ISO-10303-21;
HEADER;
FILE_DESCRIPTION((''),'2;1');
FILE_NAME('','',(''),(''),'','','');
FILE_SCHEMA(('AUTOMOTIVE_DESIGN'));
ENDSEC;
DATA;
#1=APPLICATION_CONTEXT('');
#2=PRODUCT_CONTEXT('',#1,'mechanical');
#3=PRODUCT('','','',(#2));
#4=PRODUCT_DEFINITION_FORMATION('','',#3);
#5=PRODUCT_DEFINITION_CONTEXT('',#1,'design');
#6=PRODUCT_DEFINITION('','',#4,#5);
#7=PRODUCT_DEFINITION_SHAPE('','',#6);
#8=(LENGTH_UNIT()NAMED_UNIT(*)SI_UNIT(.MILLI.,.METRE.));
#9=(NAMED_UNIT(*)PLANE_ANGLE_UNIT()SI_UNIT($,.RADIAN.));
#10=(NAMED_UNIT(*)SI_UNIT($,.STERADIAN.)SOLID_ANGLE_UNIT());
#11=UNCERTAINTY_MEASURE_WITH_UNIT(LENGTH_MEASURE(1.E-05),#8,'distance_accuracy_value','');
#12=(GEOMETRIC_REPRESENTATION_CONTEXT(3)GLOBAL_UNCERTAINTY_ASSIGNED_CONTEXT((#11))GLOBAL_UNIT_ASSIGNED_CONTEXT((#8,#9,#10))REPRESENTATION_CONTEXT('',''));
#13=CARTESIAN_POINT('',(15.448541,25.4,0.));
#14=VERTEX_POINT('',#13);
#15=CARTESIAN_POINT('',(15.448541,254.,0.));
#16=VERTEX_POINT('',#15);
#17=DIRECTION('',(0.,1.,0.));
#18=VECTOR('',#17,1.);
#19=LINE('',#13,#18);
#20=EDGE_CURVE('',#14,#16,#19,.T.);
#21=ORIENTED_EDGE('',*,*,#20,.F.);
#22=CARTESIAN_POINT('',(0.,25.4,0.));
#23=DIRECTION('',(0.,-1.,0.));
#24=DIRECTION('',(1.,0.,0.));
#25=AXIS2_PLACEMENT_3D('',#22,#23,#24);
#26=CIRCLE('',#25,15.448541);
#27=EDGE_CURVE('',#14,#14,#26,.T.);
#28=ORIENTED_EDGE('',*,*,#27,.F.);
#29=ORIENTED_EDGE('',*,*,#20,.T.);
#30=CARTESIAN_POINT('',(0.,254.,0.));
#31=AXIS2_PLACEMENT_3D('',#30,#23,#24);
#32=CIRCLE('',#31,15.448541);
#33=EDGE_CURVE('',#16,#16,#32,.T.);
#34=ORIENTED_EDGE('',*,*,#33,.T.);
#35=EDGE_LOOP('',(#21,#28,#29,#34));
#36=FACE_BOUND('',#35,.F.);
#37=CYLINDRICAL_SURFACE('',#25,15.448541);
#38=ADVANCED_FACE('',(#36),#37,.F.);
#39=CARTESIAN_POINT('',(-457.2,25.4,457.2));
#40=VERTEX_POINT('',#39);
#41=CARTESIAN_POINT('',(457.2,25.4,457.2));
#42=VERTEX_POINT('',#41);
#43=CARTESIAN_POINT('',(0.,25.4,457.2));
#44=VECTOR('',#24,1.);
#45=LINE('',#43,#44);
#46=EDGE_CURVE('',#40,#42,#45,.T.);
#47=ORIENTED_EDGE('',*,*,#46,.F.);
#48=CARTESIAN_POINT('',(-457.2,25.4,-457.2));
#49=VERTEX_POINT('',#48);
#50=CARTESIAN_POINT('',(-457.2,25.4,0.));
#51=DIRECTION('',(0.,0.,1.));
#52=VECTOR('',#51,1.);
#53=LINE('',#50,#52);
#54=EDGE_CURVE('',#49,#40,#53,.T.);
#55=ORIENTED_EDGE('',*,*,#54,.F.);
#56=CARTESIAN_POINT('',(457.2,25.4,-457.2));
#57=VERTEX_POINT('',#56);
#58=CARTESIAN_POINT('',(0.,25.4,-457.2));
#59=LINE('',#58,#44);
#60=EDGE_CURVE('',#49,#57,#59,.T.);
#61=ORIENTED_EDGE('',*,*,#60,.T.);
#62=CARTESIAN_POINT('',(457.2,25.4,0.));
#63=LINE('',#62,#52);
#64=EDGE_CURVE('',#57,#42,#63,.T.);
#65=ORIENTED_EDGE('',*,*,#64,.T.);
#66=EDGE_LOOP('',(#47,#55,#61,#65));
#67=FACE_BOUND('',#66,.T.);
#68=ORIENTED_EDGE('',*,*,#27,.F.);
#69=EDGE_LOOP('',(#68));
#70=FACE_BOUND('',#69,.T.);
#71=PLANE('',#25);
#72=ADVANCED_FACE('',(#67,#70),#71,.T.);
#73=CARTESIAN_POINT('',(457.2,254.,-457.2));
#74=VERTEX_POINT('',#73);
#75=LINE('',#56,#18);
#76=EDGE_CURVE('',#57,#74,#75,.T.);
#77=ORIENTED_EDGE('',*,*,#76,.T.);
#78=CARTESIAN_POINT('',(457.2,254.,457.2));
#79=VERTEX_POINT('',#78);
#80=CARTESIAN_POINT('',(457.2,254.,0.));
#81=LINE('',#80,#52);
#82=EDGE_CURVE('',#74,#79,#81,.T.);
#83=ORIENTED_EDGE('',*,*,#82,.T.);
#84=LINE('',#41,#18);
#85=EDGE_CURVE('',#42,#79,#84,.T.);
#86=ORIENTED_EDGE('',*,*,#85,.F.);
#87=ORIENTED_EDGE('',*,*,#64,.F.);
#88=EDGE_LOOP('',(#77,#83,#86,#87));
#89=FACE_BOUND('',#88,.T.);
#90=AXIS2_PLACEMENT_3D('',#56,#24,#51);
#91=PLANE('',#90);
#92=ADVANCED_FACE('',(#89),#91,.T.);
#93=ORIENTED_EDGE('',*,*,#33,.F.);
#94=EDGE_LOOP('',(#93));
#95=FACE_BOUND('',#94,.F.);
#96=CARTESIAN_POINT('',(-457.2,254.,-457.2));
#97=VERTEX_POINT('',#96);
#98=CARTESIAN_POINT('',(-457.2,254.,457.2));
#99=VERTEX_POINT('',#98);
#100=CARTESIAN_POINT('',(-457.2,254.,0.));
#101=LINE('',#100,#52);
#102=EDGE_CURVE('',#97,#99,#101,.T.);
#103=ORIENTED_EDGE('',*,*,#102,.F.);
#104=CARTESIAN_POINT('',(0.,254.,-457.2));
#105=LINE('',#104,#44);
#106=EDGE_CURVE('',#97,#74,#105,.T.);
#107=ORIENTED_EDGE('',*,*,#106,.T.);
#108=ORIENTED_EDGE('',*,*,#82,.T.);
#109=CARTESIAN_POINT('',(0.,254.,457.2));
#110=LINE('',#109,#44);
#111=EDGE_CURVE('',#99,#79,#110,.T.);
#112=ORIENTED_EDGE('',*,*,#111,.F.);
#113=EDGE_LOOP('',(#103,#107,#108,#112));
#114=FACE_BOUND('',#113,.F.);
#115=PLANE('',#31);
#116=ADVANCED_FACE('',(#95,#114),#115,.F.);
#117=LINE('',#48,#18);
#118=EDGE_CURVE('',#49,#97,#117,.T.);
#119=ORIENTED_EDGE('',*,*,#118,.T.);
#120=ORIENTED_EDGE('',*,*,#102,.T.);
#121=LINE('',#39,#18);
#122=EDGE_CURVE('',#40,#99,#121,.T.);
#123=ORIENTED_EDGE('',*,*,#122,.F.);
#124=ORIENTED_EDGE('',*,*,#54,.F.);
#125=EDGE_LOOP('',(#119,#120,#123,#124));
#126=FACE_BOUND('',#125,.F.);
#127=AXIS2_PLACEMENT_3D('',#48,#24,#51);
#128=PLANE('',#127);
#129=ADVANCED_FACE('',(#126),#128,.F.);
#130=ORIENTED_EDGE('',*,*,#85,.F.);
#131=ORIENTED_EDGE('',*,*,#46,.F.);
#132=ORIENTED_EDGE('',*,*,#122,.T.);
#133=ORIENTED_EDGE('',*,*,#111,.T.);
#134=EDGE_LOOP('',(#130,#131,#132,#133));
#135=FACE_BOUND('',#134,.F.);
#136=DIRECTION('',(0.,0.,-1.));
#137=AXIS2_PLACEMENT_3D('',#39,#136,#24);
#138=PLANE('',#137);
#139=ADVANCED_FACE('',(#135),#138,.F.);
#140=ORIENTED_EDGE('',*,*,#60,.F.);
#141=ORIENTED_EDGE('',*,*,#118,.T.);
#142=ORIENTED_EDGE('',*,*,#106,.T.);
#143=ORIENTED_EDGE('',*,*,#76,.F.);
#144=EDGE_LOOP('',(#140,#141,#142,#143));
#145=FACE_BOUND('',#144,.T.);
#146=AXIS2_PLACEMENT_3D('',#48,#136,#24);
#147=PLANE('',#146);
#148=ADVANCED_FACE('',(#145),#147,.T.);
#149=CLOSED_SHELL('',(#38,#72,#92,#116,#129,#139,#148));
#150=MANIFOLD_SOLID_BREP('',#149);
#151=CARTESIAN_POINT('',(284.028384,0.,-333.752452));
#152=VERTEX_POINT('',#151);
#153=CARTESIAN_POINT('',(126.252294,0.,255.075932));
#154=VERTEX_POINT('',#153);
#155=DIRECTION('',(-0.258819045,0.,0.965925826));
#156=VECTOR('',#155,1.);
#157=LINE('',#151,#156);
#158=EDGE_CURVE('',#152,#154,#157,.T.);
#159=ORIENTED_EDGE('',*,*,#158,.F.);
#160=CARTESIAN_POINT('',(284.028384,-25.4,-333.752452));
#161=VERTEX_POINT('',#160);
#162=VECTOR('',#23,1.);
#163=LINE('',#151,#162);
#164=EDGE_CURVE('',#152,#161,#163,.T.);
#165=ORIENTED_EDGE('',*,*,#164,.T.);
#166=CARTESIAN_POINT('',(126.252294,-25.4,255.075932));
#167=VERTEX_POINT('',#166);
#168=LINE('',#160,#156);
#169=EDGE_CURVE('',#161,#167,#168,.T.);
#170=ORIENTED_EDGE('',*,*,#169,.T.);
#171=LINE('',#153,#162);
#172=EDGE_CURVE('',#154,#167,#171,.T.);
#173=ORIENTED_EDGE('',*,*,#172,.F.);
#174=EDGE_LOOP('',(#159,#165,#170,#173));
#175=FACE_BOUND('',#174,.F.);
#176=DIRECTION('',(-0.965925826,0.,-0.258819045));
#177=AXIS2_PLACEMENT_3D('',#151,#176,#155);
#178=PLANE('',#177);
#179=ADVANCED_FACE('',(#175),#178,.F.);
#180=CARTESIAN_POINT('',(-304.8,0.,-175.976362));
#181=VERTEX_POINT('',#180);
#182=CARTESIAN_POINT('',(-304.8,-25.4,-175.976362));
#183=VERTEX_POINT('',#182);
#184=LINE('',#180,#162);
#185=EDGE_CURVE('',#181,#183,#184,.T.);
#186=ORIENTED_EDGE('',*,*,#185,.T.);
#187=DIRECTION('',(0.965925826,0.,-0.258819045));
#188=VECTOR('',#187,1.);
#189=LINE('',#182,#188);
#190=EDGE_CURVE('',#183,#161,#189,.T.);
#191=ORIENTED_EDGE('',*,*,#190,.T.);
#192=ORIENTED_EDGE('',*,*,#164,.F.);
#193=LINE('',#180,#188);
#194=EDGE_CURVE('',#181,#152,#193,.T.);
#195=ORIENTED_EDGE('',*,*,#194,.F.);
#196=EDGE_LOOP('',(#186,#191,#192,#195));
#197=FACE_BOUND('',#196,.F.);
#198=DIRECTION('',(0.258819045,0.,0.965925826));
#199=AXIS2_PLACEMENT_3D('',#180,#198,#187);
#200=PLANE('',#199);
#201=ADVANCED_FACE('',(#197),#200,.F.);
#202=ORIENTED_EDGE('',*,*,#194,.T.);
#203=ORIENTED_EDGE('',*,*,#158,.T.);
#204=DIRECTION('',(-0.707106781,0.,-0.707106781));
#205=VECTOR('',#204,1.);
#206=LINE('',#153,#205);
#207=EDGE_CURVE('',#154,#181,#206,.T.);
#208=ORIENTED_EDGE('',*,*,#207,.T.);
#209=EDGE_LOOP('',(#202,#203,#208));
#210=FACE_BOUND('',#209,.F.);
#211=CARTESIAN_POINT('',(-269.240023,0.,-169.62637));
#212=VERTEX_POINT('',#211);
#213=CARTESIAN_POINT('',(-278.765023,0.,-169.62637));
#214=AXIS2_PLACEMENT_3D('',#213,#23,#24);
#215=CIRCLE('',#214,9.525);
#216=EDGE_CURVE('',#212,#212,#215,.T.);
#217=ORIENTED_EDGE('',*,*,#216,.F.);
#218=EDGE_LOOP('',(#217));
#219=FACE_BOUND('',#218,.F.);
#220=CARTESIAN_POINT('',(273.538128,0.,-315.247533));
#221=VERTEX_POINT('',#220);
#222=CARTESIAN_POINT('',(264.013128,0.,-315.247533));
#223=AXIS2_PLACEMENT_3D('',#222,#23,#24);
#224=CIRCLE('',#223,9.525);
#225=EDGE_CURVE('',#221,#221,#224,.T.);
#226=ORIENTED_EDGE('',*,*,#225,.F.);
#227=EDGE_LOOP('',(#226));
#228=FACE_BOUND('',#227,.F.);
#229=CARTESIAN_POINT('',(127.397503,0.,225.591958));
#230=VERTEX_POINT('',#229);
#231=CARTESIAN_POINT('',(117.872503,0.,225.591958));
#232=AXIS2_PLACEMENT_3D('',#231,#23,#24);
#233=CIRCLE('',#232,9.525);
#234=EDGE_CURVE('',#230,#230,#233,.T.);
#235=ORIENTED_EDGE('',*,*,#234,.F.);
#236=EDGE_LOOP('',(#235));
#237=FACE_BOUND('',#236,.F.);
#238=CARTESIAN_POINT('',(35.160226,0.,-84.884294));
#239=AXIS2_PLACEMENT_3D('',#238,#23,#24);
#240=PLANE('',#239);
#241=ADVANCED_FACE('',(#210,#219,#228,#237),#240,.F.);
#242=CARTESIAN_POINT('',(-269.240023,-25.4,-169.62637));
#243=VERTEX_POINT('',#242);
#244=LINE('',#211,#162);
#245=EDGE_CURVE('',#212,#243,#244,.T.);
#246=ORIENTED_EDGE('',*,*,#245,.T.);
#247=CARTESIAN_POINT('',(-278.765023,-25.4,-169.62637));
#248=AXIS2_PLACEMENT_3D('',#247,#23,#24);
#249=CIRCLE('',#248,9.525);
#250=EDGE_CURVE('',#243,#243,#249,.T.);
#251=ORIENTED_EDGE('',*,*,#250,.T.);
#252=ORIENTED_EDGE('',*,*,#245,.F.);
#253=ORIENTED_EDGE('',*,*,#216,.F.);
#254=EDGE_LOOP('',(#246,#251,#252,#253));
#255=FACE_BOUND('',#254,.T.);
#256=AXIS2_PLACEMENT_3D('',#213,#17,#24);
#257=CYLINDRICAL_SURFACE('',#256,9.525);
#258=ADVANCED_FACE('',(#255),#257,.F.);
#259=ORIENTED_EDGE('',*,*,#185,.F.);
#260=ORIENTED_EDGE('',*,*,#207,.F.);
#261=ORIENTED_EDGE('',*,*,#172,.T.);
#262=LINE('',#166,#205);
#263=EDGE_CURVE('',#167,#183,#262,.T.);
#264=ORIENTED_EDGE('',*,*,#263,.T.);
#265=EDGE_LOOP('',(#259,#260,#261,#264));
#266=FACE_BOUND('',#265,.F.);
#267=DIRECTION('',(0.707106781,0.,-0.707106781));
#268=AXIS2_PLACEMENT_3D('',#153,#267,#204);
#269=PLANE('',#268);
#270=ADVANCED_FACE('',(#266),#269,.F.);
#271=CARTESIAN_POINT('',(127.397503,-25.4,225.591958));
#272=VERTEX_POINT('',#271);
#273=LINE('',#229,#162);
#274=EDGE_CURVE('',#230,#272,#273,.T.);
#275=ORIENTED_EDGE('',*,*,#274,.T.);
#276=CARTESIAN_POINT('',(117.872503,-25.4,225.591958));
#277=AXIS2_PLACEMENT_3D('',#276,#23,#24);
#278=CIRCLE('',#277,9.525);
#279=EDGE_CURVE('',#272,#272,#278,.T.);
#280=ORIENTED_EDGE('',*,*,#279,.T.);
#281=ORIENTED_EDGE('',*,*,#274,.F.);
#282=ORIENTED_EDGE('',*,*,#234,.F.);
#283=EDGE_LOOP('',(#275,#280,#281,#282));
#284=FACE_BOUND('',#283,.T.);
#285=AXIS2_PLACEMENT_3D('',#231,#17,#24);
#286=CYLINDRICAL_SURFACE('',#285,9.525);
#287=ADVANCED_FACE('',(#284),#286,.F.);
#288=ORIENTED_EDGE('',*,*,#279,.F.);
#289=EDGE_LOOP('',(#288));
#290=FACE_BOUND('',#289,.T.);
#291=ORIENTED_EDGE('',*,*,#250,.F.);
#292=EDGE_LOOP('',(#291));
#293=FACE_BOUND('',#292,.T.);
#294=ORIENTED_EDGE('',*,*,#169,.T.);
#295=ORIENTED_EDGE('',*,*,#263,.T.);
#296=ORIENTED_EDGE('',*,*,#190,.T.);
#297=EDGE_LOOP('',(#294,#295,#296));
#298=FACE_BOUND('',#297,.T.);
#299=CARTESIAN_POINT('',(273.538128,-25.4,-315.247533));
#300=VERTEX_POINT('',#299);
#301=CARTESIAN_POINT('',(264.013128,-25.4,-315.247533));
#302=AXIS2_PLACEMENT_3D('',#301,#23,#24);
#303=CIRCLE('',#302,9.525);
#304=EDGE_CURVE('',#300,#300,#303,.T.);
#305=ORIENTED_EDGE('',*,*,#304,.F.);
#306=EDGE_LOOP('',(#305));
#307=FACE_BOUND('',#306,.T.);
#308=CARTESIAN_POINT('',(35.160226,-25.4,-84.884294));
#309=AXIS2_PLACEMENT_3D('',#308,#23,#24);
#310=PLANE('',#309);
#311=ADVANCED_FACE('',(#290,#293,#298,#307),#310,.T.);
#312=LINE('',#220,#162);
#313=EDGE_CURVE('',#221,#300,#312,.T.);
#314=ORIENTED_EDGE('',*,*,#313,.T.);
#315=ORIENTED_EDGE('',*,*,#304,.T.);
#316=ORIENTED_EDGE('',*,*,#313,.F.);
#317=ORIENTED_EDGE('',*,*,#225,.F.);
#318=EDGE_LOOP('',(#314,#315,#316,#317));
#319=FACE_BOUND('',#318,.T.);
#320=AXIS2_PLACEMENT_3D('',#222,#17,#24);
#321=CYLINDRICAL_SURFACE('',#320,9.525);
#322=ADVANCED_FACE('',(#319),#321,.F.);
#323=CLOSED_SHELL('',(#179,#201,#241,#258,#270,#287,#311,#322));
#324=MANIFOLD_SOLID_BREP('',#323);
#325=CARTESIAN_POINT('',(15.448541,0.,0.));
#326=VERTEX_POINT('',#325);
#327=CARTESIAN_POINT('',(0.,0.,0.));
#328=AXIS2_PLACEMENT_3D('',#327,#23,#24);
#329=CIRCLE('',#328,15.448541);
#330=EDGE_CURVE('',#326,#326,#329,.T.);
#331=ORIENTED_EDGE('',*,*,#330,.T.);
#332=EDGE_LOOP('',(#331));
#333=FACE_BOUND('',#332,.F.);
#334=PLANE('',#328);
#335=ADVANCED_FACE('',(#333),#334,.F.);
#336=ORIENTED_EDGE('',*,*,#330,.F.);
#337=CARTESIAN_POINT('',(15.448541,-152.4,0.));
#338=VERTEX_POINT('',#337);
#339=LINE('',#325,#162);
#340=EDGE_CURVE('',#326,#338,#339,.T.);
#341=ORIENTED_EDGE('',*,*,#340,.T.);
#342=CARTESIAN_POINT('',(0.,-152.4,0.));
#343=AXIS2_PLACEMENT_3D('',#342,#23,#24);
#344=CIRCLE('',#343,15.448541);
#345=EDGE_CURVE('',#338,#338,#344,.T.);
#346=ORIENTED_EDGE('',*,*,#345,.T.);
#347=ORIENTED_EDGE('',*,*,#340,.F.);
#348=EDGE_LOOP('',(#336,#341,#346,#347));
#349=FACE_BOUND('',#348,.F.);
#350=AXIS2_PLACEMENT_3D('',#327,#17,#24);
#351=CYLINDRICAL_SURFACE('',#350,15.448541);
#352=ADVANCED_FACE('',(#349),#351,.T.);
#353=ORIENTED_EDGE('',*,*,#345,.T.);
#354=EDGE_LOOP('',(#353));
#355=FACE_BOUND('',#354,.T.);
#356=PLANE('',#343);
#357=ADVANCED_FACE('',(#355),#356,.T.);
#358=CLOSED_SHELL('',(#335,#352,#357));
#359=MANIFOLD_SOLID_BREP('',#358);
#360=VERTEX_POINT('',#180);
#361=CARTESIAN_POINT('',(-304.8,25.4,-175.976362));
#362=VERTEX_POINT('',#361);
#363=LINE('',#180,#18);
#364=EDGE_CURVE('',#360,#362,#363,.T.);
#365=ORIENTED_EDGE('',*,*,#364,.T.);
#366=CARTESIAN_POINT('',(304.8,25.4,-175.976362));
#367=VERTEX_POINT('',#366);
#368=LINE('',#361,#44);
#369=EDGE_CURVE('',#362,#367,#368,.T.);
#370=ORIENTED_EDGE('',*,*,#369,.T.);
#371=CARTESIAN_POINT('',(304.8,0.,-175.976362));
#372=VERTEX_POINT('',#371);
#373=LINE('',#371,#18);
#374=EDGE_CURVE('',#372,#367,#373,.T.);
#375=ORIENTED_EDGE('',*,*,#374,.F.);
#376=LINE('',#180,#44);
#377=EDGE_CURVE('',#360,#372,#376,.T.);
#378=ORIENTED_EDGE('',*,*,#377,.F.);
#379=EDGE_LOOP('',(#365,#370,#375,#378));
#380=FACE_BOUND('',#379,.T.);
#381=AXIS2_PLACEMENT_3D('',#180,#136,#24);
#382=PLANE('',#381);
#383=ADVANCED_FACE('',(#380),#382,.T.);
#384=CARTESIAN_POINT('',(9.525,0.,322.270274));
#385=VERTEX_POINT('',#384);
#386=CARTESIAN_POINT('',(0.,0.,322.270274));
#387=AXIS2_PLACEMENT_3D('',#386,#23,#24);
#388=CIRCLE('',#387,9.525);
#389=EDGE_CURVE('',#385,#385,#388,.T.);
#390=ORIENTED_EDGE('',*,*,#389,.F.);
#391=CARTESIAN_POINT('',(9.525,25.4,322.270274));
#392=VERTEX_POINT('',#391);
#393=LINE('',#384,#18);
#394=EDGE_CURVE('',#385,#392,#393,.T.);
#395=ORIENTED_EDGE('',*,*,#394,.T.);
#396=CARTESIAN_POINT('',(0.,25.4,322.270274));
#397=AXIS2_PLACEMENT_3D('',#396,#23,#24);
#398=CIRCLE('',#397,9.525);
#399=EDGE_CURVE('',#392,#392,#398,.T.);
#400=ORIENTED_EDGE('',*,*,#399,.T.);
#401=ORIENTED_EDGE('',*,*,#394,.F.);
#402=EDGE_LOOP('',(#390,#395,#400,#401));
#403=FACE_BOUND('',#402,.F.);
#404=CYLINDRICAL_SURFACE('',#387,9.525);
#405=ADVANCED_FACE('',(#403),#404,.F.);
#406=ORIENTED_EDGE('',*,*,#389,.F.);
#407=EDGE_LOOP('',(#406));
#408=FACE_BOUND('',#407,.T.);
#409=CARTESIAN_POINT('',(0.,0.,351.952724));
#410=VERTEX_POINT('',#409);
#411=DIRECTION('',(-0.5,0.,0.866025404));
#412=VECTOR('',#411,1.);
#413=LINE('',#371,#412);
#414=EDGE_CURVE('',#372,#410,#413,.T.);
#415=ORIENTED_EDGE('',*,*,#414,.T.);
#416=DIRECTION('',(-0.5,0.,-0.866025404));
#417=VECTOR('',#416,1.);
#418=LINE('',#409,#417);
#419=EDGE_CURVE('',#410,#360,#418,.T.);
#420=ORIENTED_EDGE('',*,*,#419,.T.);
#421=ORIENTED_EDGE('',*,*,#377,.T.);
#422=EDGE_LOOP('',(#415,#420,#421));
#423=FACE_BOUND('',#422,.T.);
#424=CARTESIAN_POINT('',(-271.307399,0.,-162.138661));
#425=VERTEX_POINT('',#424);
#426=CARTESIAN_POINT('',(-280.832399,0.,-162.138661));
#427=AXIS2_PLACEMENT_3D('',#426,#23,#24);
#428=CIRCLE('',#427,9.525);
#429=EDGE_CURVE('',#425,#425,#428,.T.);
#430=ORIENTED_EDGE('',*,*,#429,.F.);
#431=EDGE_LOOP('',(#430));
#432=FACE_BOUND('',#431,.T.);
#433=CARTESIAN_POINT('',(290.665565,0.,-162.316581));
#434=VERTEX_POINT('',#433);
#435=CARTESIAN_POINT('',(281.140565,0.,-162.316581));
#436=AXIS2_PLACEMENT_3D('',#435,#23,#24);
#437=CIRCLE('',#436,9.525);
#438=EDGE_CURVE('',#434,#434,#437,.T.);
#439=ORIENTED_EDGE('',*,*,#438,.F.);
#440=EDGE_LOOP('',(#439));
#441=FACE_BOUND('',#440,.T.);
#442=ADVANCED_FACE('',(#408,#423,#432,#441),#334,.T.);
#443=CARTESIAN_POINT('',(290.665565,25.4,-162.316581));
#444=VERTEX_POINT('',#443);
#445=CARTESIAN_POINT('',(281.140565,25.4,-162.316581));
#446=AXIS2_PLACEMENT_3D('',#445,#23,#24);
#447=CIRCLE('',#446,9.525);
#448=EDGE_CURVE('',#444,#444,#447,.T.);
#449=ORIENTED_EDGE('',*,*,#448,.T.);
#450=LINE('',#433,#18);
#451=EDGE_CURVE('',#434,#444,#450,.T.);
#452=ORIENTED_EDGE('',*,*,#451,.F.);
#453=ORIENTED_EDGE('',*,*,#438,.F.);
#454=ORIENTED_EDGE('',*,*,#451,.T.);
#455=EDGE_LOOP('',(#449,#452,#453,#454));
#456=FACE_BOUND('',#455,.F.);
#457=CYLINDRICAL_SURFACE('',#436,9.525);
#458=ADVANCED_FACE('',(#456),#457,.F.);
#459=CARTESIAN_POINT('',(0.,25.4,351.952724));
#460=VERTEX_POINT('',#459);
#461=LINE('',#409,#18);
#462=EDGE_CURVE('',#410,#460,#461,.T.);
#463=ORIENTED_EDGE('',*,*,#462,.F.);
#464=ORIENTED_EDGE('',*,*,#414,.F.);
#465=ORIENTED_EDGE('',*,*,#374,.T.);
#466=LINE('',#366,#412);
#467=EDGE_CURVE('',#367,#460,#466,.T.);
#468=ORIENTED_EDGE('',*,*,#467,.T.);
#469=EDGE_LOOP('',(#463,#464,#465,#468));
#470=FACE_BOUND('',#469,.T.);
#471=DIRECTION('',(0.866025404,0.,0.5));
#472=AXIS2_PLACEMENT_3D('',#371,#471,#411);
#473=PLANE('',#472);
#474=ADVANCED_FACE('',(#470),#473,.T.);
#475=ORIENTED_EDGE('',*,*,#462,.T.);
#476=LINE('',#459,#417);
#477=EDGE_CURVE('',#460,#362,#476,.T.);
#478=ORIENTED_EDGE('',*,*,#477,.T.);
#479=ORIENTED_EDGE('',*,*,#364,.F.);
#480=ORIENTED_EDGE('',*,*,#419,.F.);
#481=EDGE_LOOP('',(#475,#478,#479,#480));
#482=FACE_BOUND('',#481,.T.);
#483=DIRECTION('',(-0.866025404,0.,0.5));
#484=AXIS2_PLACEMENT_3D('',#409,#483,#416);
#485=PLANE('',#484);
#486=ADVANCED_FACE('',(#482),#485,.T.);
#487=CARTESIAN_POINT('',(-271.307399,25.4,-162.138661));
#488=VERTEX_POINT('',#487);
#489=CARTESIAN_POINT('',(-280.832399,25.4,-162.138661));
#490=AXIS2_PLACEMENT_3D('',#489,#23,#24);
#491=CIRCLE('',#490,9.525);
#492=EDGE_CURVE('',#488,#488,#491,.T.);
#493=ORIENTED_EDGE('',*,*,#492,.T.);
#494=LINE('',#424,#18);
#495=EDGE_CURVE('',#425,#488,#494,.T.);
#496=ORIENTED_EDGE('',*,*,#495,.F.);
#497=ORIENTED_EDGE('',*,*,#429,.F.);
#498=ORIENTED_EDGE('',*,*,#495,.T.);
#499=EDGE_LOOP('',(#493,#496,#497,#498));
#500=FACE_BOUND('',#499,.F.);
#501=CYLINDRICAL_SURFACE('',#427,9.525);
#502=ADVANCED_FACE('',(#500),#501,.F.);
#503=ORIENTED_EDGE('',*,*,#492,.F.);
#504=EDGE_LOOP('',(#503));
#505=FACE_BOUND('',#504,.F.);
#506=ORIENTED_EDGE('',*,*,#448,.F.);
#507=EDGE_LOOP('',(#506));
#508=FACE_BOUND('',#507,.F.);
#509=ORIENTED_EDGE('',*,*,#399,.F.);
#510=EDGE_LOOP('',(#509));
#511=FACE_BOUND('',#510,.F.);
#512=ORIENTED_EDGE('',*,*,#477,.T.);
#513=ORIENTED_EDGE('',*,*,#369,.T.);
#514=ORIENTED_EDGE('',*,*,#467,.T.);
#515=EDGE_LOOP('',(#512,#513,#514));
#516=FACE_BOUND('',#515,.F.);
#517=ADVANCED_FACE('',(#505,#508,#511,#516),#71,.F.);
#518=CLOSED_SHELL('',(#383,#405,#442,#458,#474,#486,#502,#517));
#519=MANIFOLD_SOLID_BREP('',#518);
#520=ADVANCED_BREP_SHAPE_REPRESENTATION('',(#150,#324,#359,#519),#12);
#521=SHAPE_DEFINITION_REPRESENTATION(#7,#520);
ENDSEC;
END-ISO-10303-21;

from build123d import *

# Parameters (mm, degrees)
F0_R     = 9.525
F2_DEPTH = 25.4
F1_R     = 9.525
F3_DEPTH = 25.4
F5_START = -25.4
F4_W     = 914.4
F4_H     = 914.4
F4_R     = 15.448541342
F5_DEPTH = 228.6
F6_DEPTH = 152.4


with BuildPart() as f2:
    # F0 (on Front) → F2 (new body)
    with BuildSketch(Plane.XZ):
        Polygon((-304.8, -175.976362049), (304.8, -175.976362049), (0, 351.952724098), align=None)
        with Locations((-280.8323993128, -162.1386613404)):
            Circle(F0_R, mode=Mode.SUBTRACT)
        with Locations((281.140565359, -162.3165810902)):
            Circle(F0_R, mode=Mode.SUBTRACT)
        with Locations((0, 322.2702741623)):
            Circle(F0_R, mode=Mode.SUBTRACT)
    extrude(amount=-F2_DEPTH)


with BuildPart() as f3:
    # F1 (on face) → F3 (new body)
    with BuildSketch(Plane.XZ):
        Polygon((-304.8, -175.976362049), (284.0283837058, -333.7524519435), (126.2522938113, 255.0759317623), align=None)
        with Locations((-278.7650227547, -169.6263700724)):
            Circle(F1_R, mode=Mode.SUBTRACT)
        with Locations((264.0131284784, -315.2475334434)):
            Circle(F1_R, mode=Mode.SUBTRACT)
        with Locations((117.8725027263, 225.5919577909)):
            Circle(F1_R, mode=Mode.SUBTRACT)
    extrude(amount=F3_DEPTH)


with BuildPart() as f5:
    # F4 (on Front) → F5 (new body)
    with BuildSketch(Plane.XZ.offset(F5_START)):
        Rectangle(F4_W, F4_H)
        Circle(F4_R, mode=Mode.SUBTRACT)
    extrude(amount=-F5_DEPTH)


with BuildPart() as f6:
    # F4 (on Front) → F6 (new body)
    with BuildSketch(Plane.XZ):
        Circle(F4_R)
    extrude(amount=F6_DEPTH)


solid = Compound([f2.part, f3.part, f5.part, f6.part])
